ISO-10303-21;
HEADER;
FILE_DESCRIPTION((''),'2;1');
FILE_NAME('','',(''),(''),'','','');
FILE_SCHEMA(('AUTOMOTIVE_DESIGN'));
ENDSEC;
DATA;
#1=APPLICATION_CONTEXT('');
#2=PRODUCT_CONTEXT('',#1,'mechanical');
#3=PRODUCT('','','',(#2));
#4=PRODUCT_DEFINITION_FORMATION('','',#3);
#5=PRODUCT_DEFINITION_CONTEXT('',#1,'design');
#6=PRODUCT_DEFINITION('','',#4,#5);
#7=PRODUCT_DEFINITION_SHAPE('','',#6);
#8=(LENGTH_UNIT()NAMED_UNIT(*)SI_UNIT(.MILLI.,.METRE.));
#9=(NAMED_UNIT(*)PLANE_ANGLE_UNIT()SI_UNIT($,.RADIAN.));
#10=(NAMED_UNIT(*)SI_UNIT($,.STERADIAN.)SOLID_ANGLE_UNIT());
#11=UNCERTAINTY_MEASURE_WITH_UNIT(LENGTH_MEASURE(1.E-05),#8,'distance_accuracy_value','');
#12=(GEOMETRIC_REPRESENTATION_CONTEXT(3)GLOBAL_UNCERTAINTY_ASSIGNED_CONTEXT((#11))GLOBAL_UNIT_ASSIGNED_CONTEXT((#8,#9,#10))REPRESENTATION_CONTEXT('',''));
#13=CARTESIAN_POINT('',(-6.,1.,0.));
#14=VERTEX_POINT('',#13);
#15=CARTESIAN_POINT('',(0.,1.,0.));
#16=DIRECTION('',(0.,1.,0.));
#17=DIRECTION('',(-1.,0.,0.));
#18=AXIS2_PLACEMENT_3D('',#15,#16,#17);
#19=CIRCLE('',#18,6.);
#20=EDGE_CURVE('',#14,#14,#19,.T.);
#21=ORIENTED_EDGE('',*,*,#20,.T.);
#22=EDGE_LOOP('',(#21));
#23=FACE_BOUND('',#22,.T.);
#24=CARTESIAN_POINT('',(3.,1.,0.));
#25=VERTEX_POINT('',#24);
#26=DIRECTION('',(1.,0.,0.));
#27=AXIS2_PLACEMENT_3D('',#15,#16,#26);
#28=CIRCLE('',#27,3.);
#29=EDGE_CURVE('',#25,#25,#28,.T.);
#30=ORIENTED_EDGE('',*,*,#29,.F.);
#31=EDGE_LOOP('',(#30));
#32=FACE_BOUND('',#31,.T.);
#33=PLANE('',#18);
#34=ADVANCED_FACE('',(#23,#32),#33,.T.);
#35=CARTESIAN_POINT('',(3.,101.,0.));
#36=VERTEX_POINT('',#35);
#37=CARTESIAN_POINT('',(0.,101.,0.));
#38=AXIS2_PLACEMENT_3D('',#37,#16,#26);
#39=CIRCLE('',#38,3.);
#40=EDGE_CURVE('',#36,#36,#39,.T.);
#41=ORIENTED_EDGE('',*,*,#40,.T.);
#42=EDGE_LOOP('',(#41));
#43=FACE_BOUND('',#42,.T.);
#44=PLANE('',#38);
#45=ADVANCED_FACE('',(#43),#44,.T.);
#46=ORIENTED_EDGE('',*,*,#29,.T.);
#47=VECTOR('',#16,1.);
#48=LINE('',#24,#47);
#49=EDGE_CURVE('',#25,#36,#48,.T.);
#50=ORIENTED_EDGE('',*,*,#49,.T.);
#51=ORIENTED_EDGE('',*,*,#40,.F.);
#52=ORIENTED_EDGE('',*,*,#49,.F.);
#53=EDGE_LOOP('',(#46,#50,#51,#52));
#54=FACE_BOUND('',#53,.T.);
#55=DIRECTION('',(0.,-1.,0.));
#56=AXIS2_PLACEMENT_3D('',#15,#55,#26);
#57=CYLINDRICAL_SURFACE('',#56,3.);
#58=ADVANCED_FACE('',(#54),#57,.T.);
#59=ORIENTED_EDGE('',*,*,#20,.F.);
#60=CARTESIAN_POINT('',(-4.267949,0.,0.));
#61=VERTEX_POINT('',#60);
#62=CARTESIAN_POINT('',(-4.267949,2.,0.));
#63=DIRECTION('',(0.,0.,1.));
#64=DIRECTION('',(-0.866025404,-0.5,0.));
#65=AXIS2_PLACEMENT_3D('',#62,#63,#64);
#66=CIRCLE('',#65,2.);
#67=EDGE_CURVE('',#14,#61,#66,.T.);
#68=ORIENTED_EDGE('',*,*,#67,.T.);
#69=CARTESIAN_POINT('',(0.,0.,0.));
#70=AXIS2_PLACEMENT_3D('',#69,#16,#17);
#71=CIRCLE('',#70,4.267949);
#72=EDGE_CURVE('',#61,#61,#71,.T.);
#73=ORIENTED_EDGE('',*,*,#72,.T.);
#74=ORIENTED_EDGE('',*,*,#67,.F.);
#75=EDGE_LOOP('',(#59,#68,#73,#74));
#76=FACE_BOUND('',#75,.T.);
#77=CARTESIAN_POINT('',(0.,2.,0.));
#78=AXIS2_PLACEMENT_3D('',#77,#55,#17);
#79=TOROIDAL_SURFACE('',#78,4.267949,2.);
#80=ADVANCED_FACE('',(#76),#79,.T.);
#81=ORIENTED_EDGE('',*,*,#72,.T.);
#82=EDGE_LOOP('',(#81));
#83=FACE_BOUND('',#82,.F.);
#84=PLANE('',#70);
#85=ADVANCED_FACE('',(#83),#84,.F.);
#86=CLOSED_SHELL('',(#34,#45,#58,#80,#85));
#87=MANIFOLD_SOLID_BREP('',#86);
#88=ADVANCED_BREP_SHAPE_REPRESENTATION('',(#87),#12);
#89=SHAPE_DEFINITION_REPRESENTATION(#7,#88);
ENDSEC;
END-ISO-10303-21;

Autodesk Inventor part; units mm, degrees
ref_plane "YZ Plane" through (0, 0, 0) normal (1, 0, 0) x (0, 1, 0)
ref_plane "XZ Plane" through (0, 0, 0) normal (0, 1, 0) x (-1, 0, 0)
ref_plane "XY Plane" through (0, 0, 0) normal (0, 0, 1) x (1, 0, 0)
sketch "Esquisse1" plane through (0, 0, 0) normal (0, 1, 0) x (-1, 0, 0)
  circle A0 centre (0, 0) radius 6
  dimension "d0" = 12
extrude "Extrusion1" add sketch "Esquisse1" along normal blind 1
sketch "Esquisse2" plane through (0, 1, 0) normal (0, 1, 0) x (1, 0, 0)
  circle A0 centre (0, 0) radius 6 projected
  circle A1 centre (0, 0) radius 3
  dimension "d3" = 6
extrude "Extrusion2" add sketch "Esquisse2" along normal blind 100 contours A1
fillet "Congé1" radius 2 1 edges at (6, 0, 0)
properties part number "mat"
